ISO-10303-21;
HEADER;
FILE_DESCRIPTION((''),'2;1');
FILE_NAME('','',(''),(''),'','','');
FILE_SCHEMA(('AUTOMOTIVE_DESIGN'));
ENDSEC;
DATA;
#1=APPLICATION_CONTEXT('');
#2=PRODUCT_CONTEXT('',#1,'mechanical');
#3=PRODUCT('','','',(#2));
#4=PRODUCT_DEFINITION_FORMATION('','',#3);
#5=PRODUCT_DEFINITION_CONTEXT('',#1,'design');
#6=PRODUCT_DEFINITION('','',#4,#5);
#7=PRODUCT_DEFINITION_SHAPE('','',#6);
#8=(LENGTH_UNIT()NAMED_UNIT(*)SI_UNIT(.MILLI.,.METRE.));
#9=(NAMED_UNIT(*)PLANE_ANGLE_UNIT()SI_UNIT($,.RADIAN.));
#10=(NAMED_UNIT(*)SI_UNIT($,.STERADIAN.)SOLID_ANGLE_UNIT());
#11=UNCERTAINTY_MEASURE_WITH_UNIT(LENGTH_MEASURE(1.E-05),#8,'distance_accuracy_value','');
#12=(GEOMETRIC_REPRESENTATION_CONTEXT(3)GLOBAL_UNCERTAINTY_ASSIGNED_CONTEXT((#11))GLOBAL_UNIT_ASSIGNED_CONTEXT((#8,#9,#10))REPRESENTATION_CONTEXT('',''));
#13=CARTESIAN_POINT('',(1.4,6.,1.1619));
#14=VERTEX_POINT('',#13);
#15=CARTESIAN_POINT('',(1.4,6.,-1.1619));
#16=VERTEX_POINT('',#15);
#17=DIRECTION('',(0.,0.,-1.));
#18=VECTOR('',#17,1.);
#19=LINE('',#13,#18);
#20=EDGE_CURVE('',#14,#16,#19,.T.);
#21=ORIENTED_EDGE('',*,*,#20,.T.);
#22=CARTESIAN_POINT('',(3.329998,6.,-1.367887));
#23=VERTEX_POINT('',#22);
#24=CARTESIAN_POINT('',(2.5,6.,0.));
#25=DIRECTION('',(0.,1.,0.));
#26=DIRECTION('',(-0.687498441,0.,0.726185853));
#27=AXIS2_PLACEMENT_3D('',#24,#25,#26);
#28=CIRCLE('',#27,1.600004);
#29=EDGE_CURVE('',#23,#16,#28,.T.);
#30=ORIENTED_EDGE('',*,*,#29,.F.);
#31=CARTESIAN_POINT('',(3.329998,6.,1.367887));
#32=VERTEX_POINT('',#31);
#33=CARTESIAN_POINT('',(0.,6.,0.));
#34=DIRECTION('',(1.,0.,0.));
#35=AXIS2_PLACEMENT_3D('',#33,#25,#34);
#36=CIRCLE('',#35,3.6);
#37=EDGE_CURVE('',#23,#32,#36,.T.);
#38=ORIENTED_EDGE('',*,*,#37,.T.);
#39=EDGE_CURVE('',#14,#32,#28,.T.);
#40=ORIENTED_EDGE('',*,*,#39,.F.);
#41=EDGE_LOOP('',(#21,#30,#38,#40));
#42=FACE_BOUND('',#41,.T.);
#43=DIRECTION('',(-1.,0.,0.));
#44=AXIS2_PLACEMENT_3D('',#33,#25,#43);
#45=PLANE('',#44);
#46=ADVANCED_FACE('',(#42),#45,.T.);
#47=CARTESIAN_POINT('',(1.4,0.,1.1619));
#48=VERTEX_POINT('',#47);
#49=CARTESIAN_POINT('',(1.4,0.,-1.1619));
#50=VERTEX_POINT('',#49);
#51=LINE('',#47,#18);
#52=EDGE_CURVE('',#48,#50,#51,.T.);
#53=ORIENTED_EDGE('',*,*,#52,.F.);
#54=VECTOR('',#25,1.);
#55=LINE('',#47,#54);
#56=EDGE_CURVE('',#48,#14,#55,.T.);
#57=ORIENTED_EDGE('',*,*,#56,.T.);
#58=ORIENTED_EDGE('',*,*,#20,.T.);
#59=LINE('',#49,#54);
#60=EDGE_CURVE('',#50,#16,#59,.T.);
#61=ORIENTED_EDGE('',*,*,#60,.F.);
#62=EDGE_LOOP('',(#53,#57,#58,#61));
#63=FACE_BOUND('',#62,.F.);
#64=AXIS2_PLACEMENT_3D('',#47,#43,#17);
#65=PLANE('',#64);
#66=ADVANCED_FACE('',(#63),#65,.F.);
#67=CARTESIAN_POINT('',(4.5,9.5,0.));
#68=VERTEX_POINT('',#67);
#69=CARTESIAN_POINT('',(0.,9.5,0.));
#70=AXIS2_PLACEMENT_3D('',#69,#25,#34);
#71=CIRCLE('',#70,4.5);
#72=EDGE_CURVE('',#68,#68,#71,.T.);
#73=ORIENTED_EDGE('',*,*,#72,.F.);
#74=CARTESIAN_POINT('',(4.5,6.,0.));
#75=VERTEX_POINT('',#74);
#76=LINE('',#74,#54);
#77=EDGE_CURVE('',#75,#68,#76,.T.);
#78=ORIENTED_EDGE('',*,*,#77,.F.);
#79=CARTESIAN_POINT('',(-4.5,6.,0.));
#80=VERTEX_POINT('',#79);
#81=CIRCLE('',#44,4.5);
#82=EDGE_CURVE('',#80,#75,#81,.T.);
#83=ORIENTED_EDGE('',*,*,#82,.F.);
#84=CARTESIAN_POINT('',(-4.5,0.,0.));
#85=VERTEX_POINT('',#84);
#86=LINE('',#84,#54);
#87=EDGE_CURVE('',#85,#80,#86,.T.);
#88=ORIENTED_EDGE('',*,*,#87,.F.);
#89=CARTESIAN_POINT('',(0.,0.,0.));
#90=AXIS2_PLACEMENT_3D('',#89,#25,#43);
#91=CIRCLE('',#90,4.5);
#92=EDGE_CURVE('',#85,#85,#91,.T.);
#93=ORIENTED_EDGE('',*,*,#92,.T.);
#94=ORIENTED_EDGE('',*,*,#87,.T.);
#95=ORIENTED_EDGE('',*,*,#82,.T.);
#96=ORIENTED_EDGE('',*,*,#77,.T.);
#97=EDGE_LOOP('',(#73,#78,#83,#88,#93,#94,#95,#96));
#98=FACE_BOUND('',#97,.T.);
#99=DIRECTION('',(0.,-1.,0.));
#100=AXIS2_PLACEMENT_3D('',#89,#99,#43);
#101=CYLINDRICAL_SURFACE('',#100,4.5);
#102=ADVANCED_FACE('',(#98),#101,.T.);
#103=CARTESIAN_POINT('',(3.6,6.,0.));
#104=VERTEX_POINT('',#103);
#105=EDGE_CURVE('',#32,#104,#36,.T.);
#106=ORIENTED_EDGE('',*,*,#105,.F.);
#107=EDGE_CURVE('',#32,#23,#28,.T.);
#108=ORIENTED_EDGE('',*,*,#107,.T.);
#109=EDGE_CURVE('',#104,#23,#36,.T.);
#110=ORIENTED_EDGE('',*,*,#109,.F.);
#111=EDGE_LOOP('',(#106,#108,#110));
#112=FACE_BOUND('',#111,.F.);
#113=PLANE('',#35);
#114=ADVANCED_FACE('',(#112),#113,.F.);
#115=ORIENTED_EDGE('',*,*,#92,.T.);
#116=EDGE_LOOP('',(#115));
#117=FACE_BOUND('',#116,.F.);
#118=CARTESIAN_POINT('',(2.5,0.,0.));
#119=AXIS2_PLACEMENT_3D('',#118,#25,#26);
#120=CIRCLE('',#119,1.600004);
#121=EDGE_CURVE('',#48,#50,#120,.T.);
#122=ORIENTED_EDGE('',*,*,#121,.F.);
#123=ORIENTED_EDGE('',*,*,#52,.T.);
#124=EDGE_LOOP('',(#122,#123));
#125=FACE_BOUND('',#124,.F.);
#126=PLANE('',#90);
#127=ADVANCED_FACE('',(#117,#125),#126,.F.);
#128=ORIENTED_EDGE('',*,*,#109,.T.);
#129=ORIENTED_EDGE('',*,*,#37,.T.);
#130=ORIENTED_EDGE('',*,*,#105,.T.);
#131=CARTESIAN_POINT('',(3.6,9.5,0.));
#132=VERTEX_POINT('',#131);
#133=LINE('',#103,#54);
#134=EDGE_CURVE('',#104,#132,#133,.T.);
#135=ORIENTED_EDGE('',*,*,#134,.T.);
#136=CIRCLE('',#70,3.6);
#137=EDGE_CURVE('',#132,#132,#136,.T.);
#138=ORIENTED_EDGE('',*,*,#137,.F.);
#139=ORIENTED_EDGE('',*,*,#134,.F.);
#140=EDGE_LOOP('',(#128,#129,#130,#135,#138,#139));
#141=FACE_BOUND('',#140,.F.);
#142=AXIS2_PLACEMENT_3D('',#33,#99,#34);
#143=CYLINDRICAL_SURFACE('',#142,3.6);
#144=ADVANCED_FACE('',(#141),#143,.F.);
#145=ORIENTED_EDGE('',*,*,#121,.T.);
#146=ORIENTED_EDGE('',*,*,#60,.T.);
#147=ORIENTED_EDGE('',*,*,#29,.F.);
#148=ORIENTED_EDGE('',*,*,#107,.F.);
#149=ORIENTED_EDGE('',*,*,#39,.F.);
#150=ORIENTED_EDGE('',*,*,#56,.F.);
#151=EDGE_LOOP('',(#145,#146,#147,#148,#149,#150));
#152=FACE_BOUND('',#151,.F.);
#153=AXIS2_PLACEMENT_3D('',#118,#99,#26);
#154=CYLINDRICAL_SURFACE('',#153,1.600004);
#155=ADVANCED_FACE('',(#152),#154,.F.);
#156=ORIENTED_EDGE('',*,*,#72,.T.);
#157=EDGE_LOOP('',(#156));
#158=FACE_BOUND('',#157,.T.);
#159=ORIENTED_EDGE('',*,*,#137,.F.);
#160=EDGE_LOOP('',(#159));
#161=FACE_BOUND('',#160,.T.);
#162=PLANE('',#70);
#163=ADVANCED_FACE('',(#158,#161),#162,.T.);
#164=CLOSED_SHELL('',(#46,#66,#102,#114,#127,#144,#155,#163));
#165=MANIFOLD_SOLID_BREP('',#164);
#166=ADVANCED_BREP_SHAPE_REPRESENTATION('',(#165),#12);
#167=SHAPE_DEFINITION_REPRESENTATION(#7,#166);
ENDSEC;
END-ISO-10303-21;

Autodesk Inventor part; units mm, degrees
ref_plane "YZ Plane" through (0, 0, 0) normal (1, 0, 0) x (0, 1, 0)
ref_plane "XZ Plane" through (0, 0, 0) normal (0, 1, 0) x (-1, 0, 0)
ref_plane "XY Plane" through (0, 0, 0) normal (0, 0, 1) x (1, 0, 0)
sketch "草图1" plane through (0, 0, 0) normal (0, 1, 0) x (-1, 0, 0)
  point P0 (0, 0)
sketch "草图2" plane through (0, 0, 0) normal (0, 1, 0) x (-1, 0, 0)
  circle A0 centre (0, 0) radius 4.5
  arc A1 (-1.4, 1.1619) -> (-1.4, -1.1619) centre (-2.5, 0) ccw
  line L0 (-1.4, 1.1619) -> (-1.4, -1.1619)
  dimension "d0" = 9
  dimension "d1" = 3.2
  dimension "d2" = 2.7
  dimension "d3" = 2.5
extrude "拉伸1" add sketch "草图2" along normal blind 6
sketch "草图3" plane through (0, 6, 0) normal (0, 1, 0) x (1, 0, 0)
  circle A0 centre (0, 0) radius 4.5 projected
  circle A1 centre (0, 0) radius 3.6
  dimension "d6" = 7.2
extrude "拉伸2" add sketch "草图3" along normal blind 3.5
properties part number "偏心轮"
